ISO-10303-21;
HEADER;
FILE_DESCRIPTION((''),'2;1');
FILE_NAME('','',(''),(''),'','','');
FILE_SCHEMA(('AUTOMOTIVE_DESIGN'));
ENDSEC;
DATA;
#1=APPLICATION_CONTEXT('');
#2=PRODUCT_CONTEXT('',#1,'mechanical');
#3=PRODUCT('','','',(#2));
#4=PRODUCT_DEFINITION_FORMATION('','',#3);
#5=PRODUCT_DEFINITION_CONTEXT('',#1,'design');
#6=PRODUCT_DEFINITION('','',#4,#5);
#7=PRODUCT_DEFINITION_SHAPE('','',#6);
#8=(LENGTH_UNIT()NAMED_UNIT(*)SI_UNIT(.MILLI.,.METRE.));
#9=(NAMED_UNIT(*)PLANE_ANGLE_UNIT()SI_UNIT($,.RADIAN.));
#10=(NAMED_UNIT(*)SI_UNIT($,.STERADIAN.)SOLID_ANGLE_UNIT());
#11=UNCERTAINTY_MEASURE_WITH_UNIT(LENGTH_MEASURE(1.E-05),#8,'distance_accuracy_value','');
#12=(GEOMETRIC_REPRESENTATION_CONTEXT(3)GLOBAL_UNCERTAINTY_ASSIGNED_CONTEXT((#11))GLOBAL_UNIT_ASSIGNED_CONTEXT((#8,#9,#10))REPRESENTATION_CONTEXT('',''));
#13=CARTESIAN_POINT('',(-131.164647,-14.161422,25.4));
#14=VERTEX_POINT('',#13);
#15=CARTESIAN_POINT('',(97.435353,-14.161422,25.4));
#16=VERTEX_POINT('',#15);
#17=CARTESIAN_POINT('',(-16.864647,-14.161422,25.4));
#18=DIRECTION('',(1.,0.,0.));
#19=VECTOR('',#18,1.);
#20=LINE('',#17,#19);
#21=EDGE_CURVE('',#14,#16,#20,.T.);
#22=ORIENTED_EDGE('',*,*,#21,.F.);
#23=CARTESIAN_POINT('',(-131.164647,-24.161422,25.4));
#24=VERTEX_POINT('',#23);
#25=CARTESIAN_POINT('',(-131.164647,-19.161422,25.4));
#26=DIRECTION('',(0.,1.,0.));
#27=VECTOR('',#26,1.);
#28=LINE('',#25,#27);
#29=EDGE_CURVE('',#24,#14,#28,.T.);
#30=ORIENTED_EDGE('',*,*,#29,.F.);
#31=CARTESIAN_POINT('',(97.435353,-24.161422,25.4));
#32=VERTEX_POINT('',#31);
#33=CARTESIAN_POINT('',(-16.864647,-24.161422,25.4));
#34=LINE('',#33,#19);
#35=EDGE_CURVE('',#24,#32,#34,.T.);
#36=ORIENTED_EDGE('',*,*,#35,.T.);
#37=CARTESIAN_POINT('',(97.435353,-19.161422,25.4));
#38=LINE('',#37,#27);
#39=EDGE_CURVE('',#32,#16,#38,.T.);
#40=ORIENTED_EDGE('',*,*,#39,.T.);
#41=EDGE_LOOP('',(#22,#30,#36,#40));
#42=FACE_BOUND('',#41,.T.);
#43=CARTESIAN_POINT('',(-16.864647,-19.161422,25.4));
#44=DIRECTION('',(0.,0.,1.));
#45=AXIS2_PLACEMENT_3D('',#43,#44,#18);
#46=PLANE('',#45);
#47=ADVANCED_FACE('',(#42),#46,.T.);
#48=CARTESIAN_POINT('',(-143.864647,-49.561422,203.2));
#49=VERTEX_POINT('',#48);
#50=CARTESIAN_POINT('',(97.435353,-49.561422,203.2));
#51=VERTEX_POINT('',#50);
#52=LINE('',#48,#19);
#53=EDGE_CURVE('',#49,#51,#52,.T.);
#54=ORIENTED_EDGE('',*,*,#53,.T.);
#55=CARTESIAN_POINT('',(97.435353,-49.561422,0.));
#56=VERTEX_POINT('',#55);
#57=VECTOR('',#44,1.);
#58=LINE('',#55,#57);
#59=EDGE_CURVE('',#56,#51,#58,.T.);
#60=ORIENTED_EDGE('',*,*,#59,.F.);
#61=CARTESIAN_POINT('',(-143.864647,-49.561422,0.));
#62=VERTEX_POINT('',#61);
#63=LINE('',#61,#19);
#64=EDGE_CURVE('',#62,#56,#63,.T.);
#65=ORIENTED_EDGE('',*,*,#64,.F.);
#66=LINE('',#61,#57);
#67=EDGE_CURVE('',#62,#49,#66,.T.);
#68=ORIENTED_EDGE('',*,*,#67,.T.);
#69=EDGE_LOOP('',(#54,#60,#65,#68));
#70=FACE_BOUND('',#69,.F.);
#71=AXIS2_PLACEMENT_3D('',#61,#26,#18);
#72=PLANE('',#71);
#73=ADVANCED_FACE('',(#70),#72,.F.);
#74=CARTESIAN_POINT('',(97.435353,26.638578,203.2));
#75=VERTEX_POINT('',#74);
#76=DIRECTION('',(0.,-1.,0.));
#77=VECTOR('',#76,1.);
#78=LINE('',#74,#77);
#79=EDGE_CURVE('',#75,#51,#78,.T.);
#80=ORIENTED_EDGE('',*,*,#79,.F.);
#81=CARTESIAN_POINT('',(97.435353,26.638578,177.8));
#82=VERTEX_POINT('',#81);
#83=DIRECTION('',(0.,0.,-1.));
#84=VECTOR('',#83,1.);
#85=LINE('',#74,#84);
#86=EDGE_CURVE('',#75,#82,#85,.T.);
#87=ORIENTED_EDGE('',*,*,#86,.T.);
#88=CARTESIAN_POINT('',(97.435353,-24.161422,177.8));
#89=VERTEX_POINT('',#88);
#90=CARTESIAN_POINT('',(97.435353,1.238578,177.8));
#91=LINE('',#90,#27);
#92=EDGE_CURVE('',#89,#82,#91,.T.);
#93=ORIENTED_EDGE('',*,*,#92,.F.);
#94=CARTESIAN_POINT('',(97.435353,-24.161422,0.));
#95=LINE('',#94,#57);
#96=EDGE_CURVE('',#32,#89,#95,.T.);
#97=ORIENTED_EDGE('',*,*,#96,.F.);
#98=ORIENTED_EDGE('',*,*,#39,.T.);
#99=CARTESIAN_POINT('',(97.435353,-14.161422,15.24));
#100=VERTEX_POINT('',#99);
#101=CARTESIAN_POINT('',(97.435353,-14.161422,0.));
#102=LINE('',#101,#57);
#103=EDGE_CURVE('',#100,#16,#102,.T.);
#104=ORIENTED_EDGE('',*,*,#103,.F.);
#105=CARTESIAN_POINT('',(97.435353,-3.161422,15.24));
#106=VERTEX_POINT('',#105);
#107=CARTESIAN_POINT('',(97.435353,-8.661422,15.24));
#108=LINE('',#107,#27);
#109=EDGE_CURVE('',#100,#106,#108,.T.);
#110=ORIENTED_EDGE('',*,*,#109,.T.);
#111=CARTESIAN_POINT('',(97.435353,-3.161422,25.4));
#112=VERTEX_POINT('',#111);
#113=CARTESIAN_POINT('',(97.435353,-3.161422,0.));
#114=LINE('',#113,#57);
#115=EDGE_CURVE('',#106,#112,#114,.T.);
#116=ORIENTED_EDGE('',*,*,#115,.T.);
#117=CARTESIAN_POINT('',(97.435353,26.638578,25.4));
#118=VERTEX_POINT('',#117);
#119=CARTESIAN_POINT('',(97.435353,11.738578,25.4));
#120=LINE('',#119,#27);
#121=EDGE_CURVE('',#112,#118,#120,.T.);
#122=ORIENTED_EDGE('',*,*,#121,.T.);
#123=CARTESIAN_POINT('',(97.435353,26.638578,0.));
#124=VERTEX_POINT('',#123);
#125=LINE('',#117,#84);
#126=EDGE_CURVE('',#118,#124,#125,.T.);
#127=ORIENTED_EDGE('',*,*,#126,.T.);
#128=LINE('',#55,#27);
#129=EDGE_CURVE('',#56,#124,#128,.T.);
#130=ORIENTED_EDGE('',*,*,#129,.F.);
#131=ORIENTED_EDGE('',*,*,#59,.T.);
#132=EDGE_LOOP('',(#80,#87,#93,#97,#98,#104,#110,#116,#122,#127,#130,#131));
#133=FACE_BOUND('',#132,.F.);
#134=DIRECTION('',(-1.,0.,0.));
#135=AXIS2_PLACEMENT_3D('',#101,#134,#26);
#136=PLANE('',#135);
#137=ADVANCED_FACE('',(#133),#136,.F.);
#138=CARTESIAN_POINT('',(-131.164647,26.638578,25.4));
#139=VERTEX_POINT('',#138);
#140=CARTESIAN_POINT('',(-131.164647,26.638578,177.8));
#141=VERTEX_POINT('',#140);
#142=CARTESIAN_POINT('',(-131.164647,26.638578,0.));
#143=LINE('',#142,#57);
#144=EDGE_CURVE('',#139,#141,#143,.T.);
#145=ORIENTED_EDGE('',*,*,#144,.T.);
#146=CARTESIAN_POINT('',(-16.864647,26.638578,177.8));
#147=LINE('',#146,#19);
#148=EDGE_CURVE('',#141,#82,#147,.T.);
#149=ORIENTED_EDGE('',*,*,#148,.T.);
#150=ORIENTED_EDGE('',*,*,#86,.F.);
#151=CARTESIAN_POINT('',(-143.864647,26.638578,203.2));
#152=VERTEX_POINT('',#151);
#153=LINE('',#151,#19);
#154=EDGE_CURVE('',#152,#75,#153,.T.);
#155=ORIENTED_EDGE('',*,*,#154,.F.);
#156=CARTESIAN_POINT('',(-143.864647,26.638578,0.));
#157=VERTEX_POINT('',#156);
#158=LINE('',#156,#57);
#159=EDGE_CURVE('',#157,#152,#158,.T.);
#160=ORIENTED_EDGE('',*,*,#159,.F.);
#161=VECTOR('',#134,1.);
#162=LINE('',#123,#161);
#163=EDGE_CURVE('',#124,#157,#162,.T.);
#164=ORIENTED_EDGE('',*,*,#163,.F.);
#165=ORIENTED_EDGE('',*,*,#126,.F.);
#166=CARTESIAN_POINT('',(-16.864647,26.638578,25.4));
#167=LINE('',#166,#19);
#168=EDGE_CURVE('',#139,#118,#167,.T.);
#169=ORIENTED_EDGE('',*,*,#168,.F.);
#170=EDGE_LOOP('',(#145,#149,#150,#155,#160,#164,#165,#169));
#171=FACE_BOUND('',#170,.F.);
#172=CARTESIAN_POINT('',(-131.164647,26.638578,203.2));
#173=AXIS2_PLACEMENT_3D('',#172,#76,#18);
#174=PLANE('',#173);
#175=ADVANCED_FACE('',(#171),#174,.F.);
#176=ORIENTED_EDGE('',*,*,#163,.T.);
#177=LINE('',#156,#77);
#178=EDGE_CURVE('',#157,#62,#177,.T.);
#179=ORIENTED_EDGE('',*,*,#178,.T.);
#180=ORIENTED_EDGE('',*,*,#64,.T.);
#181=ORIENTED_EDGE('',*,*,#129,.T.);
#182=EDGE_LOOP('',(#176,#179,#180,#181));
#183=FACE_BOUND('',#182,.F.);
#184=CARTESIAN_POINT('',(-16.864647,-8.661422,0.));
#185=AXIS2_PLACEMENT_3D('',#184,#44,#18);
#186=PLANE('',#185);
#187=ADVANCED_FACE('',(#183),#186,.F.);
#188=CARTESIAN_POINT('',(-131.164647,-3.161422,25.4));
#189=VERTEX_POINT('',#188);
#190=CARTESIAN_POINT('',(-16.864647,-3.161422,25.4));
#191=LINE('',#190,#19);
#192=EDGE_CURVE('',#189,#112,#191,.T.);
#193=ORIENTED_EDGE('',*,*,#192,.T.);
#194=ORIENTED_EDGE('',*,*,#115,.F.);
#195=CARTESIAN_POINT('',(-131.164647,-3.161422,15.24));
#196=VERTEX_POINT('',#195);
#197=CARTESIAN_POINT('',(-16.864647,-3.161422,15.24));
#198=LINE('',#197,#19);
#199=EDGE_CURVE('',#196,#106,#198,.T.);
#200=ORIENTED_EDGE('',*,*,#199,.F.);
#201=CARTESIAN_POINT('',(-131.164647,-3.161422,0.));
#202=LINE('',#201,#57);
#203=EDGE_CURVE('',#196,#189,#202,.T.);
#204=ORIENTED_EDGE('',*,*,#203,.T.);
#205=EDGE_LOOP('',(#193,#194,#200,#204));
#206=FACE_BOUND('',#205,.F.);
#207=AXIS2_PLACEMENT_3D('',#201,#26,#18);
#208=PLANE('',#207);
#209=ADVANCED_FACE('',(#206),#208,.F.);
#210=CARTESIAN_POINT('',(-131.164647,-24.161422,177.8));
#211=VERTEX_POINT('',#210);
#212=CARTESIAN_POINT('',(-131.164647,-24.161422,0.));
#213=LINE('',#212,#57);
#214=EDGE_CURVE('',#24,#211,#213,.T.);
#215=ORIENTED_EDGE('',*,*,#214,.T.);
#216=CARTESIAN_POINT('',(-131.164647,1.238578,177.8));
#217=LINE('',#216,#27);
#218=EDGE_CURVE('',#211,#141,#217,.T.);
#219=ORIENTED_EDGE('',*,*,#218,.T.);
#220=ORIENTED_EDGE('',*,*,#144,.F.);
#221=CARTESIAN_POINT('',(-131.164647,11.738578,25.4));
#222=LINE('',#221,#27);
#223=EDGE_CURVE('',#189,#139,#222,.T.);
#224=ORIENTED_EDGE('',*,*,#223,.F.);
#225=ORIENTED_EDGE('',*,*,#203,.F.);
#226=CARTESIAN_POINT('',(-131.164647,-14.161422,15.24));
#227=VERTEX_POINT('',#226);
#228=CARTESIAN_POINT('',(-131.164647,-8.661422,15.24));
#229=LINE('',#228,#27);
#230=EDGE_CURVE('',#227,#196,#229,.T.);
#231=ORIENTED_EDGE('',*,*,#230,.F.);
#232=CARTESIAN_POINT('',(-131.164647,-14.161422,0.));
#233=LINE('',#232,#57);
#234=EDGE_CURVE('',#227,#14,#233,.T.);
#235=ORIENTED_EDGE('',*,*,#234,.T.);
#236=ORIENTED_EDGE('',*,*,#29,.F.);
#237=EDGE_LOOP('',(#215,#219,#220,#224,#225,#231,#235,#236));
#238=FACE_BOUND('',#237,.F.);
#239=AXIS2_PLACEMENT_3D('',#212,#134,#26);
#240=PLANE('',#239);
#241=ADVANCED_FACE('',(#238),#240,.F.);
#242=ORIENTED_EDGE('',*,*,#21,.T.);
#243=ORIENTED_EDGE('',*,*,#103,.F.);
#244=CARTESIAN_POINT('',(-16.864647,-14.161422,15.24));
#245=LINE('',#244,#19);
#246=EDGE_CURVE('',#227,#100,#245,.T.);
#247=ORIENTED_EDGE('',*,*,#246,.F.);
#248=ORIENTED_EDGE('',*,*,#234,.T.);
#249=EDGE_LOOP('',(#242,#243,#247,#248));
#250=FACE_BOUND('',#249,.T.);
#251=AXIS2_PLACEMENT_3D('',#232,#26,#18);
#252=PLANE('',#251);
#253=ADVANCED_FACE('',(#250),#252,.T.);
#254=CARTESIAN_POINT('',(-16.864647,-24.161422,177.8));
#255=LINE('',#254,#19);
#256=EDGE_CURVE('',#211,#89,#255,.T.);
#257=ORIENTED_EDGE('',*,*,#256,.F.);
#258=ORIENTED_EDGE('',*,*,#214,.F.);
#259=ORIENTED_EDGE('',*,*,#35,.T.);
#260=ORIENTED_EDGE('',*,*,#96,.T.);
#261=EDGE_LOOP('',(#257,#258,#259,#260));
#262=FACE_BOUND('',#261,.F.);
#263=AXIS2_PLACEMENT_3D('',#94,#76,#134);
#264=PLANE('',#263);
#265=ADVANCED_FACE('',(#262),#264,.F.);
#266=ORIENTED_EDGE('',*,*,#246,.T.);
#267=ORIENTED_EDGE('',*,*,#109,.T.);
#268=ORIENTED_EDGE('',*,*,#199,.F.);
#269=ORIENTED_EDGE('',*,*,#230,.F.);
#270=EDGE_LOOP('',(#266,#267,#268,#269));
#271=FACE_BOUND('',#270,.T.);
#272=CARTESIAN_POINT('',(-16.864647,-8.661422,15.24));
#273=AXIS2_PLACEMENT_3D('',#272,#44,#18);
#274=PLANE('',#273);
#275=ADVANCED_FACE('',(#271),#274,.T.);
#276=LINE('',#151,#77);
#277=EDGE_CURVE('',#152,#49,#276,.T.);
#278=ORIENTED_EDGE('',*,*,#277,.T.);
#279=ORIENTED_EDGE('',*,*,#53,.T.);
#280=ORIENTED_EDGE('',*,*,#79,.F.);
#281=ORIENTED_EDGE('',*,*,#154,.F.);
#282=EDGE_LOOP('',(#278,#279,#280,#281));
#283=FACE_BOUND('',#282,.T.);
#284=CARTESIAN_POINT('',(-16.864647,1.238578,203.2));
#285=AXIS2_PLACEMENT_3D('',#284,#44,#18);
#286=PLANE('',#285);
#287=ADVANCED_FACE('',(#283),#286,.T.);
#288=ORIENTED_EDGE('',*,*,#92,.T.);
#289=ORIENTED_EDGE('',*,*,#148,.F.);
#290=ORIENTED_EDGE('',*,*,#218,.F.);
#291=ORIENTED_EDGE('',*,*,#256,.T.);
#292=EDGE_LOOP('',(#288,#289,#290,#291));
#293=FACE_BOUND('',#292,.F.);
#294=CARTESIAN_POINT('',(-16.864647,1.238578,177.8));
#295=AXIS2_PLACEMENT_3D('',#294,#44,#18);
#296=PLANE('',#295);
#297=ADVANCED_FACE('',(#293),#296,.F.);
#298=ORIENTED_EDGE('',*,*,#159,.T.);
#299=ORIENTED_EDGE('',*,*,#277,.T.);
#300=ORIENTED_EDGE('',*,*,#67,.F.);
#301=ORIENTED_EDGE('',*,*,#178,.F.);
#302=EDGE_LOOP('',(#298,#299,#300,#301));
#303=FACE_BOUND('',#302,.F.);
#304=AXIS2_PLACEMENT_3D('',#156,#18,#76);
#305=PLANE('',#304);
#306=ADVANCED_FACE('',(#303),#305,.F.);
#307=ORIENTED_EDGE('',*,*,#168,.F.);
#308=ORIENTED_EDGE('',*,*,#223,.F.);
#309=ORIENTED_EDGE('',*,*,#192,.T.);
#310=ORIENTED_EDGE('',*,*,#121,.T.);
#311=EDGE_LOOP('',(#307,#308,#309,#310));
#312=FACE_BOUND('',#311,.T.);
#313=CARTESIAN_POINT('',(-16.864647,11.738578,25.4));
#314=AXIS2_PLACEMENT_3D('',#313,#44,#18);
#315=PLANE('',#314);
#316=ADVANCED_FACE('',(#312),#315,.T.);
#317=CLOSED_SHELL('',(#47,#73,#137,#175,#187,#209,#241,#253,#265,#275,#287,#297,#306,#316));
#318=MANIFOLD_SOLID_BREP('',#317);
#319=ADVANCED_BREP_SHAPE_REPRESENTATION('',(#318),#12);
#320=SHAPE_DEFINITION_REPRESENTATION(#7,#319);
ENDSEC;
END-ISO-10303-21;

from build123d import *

# Parameters (mm, degrees)
F1_DEPTH = 203.2
F0_W     = 228.6
F0_H     = 10
F2_DEPTH = 25.4
F0_H_2   = 29.8
F0_H_3   = 11
F3_DEPTH = 15.24
F4_W     = 228.6
F4_H     = 50.8
F5_DEPTH = 25.4
F6_W     = 33.1639014184
F6_H     = 23.3497917652
F7_DEPTH = 25.4
F8_W     = 231.14
F8_H     = 60.0164352887
F9_DEPTH = 0.254


# Not quite as in the source:
# - a feature names something its author has since deleted; it is built from what else it names


with BuildPart() as f1:
    # F0 (on Top) → F1 (new body)
    with BuildSketch(Plane.XY):
        Polygon((-143.864646554, -49.5614223182), (97.435353446, -49.5614223182), (97.435353446, -24.1614223182), (-131.164646554, -24.1614223182), (-131.164646554, -14.1614223182), (-131.164646554, -3.1614223182), (-131.164646554, 26.6385776818), (-143.864646554, 26.6385776818), align=None)
    extrude(amount=F1_DEPTH)

    # F4 (on face) → F5 (join)
    with BuildSketch(Plane.XY.offset(203.2)):
        with Locations((-16.864646554, 1.2385776818)):
            Rectangle(F4_W, F4_H)
    extrude(amount=-F5_DEPTH)



with BuildPart() as f2:
    # F0 (on Top) → F2 (new body)
    with BuildSketch(Plane.XY):
        with Locations((-16.864646554, -19.1614223182)):
            Rectangle(F0_W, F0_H)
    extrude(amount=F2_DEPTH)


with BuildPart() as f2b:
    # F0 (on Top) → F2, piece 2 (new body)
    with BuildSketch(Plane.XY):
        with Locations((-16.864646554, 11.7385776818)):
            Rectangle(F0_W, F0_H_2)
    extrude(amount=F2_DEPTH)


with BuildPart() as f3:
    # F0 (on Top) → F3 (new body)
    with BuildSketch(Plane.XY):
        with Locations((-16.864646554, -8.6614223182)):
            Rectangle(F0_W, F0_H_3)
    extrude(amount=F3_DEPTH)


with BuildPart() as f1_1:
    add(f1.part)

    add(f2.part)  # F7 merges F2
    # F6 (on face) → F7 (join)
    with BuildSketch(Plane.YZ.offset(97.435353446)):
        with Locations((-32.979471609, 11.6748958826)):
            Rectangle(F6_W, F6_H)
    extrude(amount=-F7_DEPTH)


    add(f2b.part)  # F9 merges F2b

    add(f3.part)  # F9 merges F3
    # F8 (on face) → F9 (join)
    with BuildSketch(Plane(origin=(0, 0, 0), x_dir=(1, 0, 0), z_dir=(0, 0, -1))):
        with Locations((-18.134646554, 3.3696399626)):
            Rectangle(F8_W, F8_H)
    extrude(amount=-F9_DEPTH)


solid = f1_1.part
